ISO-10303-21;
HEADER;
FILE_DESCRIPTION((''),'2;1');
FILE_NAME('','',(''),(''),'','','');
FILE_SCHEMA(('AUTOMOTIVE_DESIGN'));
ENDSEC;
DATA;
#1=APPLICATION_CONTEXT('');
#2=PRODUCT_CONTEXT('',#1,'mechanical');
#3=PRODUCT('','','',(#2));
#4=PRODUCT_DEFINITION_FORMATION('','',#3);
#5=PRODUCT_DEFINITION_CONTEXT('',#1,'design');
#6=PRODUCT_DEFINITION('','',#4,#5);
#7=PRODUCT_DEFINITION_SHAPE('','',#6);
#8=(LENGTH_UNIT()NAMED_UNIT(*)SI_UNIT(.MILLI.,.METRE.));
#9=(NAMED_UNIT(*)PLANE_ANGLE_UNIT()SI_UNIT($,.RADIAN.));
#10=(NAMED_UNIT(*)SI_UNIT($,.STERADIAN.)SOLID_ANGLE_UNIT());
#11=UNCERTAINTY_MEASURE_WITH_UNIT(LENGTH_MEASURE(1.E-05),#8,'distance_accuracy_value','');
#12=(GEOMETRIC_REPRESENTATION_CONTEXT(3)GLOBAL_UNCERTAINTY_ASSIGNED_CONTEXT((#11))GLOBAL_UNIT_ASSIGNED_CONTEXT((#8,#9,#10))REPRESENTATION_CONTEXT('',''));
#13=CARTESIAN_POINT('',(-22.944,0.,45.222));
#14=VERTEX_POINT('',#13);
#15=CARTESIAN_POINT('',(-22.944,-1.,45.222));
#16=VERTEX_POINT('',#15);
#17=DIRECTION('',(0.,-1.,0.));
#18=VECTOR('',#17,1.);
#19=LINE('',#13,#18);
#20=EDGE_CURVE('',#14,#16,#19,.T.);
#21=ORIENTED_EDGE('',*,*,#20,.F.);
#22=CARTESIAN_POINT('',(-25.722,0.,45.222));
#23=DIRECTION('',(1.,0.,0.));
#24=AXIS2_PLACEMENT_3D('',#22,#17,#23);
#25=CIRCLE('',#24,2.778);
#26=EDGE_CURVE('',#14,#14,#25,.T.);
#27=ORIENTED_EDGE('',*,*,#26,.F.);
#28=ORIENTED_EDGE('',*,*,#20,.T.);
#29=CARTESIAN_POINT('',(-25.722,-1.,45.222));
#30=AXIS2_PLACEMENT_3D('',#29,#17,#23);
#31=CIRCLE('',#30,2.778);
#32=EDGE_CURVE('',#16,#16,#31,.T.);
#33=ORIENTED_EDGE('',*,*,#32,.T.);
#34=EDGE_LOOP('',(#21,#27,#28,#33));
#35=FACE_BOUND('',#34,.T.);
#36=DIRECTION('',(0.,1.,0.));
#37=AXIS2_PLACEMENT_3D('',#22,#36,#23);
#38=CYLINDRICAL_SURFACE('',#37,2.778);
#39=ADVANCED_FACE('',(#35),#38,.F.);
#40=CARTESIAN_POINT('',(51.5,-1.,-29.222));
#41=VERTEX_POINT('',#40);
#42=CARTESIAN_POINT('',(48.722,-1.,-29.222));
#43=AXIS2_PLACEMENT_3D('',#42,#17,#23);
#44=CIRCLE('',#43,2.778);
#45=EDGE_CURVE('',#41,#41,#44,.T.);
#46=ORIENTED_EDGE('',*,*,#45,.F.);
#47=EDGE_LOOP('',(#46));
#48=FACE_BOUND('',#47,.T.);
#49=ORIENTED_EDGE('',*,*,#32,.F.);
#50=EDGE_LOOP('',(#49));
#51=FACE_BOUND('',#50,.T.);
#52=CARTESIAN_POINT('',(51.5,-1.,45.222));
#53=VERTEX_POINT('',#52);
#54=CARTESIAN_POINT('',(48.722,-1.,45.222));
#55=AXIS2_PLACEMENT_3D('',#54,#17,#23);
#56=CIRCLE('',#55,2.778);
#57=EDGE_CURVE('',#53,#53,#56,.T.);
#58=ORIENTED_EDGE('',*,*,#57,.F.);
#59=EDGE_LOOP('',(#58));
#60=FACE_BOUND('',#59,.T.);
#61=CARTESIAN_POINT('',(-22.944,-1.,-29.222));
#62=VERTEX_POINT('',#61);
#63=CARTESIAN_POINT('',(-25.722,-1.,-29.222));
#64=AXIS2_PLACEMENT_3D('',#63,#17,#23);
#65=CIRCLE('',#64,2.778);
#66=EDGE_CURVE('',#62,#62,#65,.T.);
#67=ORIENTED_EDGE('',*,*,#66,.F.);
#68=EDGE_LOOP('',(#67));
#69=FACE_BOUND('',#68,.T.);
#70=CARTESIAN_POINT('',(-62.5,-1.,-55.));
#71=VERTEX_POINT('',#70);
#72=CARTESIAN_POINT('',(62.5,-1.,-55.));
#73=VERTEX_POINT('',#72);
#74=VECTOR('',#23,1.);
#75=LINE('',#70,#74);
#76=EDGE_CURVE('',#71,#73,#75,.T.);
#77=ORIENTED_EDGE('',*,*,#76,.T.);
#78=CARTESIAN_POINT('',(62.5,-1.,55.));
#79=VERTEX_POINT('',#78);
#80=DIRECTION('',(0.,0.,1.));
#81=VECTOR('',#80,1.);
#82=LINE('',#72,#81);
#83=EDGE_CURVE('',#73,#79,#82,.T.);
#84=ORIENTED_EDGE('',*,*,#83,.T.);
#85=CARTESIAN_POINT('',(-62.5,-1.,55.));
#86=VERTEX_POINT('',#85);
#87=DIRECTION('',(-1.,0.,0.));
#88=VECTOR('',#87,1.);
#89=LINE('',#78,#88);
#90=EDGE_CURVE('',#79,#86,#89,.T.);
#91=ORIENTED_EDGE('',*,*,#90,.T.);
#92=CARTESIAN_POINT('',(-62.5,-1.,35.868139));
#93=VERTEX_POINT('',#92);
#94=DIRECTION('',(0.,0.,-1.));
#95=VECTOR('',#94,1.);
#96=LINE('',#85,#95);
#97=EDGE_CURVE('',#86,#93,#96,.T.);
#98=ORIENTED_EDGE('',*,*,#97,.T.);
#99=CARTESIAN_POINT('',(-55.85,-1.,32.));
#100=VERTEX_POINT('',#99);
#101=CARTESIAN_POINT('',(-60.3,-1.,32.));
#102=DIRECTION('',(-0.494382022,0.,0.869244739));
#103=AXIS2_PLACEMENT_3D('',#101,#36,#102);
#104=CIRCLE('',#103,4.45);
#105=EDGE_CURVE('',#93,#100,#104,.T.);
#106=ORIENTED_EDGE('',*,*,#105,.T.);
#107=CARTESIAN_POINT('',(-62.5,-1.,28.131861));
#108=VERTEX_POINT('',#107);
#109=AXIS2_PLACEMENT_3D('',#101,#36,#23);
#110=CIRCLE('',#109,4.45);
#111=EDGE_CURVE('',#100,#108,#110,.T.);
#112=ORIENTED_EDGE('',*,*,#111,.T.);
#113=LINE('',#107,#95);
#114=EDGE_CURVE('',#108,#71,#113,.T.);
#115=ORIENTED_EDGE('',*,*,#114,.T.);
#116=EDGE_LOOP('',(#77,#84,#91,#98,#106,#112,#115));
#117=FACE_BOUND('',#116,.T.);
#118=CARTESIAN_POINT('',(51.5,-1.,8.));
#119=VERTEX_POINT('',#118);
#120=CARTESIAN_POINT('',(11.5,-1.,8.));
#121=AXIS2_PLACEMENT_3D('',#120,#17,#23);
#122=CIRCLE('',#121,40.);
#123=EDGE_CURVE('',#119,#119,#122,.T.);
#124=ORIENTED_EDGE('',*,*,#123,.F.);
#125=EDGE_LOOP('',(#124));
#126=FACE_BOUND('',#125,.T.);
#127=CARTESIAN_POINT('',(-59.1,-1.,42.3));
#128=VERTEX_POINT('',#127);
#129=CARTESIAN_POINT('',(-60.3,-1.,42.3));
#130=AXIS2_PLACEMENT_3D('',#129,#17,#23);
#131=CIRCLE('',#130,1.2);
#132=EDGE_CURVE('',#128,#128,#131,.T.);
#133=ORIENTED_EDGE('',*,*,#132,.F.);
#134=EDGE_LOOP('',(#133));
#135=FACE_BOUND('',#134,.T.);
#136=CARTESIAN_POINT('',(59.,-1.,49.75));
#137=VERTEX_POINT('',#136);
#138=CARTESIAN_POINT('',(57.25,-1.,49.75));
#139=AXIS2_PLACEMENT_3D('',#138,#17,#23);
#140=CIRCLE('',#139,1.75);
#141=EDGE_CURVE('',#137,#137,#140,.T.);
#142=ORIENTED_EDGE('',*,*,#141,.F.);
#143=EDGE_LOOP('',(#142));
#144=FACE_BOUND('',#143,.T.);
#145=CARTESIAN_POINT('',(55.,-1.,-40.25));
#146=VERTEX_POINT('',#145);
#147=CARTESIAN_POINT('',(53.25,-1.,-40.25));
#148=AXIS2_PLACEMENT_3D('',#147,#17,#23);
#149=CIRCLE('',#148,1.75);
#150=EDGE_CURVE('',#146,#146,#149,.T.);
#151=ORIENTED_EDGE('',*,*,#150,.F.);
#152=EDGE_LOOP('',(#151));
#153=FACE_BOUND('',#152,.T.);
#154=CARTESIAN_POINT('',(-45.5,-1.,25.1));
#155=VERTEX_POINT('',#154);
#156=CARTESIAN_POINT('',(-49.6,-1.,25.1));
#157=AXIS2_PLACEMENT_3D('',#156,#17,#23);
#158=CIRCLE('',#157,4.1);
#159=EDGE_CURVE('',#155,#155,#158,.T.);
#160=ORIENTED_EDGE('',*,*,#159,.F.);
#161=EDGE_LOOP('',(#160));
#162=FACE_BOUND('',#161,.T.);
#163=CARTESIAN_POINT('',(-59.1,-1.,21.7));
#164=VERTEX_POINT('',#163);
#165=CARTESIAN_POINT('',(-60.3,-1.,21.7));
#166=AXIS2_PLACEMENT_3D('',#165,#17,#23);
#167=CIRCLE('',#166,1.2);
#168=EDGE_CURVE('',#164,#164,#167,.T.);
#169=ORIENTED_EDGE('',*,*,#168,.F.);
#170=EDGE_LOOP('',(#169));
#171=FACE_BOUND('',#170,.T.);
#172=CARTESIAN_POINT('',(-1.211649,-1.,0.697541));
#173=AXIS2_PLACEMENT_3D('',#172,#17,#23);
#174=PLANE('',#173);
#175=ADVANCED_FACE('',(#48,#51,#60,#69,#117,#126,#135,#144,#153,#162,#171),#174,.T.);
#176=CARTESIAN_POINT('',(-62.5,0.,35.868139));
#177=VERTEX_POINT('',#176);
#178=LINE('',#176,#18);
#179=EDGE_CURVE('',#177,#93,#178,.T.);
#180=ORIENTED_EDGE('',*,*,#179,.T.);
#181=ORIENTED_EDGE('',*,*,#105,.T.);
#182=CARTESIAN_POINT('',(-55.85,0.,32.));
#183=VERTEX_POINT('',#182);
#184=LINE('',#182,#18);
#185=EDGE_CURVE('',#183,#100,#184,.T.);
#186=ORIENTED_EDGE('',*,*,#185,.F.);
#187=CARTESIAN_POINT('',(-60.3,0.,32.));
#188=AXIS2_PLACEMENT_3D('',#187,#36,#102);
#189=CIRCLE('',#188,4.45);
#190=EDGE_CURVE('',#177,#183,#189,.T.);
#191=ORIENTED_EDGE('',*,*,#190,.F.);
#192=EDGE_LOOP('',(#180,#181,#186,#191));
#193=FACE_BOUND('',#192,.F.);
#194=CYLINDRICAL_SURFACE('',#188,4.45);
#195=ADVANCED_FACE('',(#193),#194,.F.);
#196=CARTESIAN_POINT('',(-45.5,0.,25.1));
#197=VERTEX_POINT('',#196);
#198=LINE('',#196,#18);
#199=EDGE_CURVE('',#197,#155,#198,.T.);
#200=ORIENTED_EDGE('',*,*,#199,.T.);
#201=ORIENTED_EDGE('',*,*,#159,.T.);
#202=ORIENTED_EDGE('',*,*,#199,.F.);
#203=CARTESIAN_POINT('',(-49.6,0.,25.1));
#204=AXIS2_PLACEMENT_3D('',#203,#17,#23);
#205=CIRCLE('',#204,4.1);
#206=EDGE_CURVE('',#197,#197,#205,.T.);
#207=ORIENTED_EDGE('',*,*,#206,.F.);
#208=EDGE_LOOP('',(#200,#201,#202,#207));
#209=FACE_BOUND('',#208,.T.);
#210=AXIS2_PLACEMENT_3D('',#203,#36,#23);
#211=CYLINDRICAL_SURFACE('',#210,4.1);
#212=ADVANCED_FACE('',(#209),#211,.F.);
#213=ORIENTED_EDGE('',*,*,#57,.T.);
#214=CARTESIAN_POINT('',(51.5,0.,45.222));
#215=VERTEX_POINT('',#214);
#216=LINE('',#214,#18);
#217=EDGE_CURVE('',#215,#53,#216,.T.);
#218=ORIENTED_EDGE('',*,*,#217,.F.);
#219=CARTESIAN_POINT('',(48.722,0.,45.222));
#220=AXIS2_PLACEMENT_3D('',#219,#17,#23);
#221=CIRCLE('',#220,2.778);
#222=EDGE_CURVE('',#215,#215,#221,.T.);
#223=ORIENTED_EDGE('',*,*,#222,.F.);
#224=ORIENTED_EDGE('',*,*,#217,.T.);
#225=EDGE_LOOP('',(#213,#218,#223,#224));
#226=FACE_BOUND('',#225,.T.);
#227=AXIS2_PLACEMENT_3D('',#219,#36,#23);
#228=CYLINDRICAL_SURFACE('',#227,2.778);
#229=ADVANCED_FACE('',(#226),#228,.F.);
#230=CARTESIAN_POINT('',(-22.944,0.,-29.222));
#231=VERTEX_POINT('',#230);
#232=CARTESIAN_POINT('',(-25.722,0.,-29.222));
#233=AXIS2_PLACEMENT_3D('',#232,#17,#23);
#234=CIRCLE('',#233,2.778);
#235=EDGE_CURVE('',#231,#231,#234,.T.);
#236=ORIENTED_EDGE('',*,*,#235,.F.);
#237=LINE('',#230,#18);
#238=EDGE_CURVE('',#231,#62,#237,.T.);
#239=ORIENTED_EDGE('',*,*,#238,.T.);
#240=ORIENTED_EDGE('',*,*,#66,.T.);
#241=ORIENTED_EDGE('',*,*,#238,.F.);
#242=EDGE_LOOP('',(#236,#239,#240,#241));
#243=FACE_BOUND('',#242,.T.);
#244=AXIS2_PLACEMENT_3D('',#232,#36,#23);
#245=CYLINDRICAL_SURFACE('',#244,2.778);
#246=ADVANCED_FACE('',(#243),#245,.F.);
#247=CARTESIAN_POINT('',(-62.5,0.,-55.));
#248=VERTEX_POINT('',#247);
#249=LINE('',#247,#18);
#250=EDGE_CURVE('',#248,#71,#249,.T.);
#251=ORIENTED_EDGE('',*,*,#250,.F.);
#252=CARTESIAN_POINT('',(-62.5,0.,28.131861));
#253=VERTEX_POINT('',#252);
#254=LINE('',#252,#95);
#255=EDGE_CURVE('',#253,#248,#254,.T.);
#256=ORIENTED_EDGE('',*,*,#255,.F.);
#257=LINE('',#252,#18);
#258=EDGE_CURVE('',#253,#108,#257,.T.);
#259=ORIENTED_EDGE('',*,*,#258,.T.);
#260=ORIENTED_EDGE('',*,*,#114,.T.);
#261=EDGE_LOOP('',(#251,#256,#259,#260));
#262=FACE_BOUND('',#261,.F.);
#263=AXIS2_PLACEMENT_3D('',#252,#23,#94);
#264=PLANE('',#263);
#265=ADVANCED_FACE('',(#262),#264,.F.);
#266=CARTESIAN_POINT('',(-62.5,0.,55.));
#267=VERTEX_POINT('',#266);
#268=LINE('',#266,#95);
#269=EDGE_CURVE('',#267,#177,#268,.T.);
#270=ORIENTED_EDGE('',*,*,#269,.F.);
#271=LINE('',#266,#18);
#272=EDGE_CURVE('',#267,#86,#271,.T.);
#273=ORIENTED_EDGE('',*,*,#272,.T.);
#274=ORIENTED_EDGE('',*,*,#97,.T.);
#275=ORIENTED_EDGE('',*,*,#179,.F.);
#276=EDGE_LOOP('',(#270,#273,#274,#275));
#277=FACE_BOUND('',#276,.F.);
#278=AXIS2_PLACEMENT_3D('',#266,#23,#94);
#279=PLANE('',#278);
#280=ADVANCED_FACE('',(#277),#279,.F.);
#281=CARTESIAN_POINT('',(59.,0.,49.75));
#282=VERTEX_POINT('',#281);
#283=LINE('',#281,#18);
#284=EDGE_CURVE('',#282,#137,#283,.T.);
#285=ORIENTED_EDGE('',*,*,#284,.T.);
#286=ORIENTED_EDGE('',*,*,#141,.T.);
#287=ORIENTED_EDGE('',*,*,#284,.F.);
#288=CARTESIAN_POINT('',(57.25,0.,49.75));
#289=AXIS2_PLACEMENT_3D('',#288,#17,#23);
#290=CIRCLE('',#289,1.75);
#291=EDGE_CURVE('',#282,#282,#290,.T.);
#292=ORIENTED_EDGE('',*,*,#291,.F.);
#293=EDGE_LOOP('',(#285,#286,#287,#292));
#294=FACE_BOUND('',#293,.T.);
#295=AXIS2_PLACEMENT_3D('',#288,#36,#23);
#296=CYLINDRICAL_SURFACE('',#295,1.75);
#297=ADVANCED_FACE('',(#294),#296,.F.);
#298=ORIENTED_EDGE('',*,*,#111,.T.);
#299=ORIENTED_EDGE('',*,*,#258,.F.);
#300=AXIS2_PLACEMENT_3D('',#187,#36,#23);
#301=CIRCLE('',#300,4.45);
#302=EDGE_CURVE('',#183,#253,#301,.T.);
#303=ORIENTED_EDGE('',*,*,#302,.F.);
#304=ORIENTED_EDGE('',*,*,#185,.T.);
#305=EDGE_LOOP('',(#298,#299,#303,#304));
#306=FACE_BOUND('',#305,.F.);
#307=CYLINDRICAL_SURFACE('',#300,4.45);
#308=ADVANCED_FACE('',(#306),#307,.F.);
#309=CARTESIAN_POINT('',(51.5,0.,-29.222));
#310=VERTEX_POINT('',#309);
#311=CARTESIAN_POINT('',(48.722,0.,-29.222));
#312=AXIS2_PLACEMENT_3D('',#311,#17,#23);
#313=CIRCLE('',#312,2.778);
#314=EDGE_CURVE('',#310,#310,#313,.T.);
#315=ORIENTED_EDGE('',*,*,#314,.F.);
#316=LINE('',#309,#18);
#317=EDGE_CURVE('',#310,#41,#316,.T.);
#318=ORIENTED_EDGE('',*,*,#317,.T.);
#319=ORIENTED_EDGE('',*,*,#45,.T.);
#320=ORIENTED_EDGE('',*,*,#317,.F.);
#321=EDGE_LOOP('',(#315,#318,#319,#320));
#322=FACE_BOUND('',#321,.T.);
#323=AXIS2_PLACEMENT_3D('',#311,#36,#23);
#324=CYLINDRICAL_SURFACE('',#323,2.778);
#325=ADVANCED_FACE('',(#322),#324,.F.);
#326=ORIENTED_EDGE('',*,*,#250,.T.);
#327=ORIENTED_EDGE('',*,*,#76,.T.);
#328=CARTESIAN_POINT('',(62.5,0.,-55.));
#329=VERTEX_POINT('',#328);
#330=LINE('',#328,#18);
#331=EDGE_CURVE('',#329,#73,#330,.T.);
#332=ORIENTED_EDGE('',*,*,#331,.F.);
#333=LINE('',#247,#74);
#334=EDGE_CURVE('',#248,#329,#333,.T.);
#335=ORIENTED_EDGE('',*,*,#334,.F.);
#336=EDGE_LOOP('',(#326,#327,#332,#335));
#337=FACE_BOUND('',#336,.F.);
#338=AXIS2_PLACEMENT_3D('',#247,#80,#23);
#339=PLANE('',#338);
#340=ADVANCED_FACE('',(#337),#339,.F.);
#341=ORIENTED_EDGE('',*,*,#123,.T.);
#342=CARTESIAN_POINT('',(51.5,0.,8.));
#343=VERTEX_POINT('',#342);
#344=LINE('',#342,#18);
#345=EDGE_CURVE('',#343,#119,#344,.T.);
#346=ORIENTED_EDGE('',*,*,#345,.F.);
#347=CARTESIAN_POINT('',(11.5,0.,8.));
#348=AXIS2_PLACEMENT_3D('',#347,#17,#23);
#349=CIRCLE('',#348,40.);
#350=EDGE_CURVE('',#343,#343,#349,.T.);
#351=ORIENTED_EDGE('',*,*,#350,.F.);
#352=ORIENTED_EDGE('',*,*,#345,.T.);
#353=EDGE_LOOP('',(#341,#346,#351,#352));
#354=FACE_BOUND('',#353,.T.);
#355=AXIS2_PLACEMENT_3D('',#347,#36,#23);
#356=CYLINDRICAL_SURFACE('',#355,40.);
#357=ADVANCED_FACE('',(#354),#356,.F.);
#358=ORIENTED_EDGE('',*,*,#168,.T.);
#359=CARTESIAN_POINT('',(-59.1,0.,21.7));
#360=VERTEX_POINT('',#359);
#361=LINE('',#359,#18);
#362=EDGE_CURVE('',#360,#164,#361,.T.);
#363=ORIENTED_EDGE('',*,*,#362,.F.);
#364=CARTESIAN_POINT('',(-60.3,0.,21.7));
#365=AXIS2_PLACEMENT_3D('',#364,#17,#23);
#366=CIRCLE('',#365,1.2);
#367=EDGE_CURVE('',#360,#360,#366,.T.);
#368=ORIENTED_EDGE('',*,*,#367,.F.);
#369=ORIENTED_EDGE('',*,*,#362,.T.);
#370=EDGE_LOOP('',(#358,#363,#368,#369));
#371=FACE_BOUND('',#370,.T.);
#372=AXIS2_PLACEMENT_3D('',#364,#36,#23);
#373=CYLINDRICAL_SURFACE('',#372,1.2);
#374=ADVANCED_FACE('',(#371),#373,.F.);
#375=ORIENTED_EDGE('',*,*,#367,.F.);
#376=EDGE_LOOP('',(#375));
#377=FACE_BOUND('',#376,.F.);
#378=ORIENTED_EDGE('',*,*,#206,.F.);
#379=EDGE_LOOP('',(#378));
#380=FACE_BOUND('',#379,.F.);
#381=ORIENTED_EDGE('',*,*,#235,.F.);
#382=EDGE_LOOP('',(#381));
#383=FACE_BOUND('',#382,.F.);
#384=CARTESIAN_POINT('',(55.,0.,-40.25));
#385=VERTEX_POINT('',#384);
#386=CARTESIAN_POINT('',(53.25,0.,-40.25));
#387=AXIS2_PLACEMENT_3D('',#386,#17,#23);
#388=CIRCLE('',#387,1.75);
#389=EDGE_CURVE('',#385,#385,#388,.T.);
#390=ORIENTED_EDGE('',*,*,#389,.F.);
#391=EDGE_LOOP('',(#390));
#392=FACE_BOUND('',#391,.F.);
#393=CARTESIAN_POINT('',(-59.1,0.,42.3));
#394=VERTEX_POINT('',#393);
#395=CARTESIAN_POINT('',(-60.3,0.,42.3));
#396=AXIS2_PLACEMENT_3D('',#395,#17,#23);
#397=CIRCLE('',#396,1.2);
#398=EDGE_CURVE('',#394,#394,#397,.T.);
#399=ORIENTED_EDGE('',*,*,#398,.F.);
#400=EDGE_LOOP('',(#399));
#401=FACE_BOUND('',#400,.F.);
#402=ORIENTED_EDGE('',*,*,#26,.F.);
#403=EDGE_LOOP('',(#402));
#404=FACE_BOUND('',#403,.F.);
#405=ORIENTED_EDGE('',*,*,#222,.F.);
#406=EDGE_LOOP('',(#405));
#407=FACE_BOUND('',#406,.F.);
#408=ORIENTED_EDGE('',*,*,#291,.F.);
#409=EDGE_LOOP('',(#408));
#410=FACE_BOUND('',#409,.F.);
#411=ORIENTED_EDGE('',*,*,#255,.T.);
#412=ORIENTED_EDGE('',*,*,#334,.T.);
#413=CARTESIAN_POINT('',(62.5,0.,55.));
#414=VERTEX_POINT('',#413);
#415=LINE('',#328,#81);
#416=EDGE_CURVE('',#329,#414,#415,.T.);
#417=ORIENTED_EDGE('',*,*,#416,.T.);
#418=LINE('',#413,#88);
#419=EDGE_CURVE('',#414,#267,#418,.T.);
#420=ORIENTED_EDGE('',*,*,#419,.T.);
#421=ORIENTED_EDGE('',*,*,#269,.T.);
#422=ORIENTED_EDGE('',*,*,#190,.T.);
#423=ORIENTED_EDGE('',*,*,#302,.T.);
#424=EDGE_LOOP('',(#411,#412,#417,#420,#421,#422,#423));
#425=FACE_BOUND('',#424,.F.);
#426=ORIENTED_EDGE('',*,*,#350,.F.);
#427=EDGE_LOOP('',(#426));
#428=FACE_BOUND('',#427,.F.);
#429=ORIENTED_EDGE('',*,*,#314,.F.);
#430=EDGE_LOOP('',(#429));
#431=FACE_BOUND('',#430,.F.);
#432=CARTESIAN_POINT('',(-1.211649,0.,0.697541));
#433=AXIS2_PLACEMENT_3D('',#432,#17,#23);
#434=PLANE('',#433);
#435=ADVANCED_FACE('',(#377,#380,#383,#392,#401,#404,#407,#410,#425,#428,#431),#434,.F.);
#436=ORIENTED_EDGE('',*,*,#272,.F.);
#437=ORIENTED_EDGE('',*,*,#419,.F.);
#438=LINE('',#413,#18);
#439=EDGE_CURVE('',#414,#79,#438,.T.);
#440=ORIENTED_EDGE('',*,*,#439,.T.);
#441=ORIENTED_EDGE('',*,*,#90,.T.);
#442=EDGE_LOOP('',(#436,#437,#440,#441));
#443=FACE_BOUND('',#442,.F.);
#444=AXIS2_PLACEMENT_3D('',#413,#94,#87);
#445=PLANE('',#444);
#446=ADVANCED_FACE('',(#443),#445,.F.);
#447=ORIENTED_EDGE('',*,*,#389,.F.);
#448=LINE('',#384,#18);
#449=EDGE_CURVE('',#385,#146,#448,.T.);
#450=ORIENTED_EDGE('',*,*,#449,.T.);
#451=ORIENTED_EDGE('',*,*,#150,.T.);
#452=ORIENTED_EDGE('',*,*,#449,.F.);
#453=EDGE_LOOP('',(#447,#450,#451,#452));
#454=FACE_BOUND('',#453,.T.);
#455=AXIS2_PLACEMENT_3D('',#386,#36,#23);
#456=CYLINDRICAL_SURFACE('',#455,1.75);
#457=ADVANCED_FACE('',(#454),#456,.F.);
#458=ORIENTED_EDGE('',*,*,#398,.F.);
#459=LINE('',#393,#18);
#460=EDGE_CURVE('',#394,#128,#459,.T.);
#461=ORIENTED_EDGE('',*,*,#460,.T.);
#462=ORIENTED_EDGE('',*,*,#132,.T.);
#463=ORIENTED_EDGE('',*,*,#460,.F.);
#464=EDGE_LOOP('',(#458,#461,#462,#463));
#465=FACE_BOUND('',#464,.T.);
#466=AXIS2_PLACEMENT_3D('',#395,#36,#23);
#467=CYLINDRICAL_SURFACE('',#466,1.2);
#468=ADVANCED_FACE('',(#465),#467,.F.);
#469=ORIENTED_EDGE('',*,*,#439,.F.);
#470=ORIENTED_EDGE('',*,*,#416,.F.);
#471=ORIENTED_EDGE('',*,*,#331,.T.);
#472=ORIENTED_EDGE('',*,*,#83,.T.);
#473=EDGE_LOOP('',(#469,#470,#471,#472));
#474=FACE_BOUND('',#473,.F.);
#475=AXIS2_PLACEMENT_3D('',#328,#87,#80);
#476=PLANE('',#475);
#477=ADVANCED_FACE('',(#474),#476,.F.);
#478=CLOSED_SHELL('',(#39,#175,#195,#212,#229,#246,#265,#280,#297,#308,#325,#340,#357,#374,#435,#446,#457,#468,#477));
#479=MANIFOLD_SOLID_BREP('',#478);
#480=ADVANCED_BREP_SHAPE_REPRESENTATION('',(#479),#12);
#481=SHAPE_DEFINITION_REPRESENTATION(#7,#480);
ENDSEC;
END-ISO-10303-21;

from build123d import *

# Parameters (mm, degrees)
F0_R     = 2.778
F0_R_2   = 1.75
F0_R_3   = 1.2
F0_R_4   = 4.1
F0_R_5   = 40
F1_DEPTH = 1


# Not quite as in the source:
# - a feature names something its author has since deleted; it is built from what else it names


with BuildPart() as f1:
    # F0 (on Front) → F1 (new body)
    with BuildSketch(Plane.XZ):
        with BuildLine():
            Line((-62.5, 28.1318609125), (-62.5, -55))
            Line((-62.5, -55), (62.5, -55))
            Line((62.5, -55), (62.5, 55))
            Line((62.5, 55), (-62.5, 55))
            Line((-62.5, 55), (-62.5, 35.8681390875))
            ThreePointArc((-62.5, 35.8681390875), (-58.0625349165, 35.8465893984), (-55.85, 32))
            ThreePointArc((-55.85, 32), (-58.0625349165, 28.1534106016), (-62.5, 28.1318609125))
        make_face()
        with Locations((-25.722, -29.222)):
            Circle(F0_R, mode=Mode.SUBTRACT)
        with Locations((53.25, -40.25)):
            Circle(F0_R_2, mode=Mode.SUBTRACT)
        with Locations((48.722, -29.222)):
            Circle(F0_R, mode=Mode.SUBTRACT)
        with Locations((-60.3, 21.7)):
            Circle(F0_R_3, mode=Mode.SUBTRACT)
        with Locations((-49.6, 25.1)):
            Circle(F0_R_4, mode=Mode.SUBTRACT)
        with Locations((-60.3, 42.3)):
            Circle(F0_R_3, mode=Mode.SUBTRACT)
        with Locations((-25.722, 45.222)):
            Circle(F0_R, mode=Mode.SUBTRACT)
        with Locations((11.5, 8)):
            Circle(F0_R_5, mode=Mode.SUBTRACT)
        with Locations((48.722, 45.222)):
            Circle(F0_R, mode=Mode.SUBTRACT)
        with Locations((57.25, 49.75)):
            Circle(F0_R_2, mode=Mode.SUBTRACT)
    extrude(amount=F1_DEPTH)


solid = f1.part
